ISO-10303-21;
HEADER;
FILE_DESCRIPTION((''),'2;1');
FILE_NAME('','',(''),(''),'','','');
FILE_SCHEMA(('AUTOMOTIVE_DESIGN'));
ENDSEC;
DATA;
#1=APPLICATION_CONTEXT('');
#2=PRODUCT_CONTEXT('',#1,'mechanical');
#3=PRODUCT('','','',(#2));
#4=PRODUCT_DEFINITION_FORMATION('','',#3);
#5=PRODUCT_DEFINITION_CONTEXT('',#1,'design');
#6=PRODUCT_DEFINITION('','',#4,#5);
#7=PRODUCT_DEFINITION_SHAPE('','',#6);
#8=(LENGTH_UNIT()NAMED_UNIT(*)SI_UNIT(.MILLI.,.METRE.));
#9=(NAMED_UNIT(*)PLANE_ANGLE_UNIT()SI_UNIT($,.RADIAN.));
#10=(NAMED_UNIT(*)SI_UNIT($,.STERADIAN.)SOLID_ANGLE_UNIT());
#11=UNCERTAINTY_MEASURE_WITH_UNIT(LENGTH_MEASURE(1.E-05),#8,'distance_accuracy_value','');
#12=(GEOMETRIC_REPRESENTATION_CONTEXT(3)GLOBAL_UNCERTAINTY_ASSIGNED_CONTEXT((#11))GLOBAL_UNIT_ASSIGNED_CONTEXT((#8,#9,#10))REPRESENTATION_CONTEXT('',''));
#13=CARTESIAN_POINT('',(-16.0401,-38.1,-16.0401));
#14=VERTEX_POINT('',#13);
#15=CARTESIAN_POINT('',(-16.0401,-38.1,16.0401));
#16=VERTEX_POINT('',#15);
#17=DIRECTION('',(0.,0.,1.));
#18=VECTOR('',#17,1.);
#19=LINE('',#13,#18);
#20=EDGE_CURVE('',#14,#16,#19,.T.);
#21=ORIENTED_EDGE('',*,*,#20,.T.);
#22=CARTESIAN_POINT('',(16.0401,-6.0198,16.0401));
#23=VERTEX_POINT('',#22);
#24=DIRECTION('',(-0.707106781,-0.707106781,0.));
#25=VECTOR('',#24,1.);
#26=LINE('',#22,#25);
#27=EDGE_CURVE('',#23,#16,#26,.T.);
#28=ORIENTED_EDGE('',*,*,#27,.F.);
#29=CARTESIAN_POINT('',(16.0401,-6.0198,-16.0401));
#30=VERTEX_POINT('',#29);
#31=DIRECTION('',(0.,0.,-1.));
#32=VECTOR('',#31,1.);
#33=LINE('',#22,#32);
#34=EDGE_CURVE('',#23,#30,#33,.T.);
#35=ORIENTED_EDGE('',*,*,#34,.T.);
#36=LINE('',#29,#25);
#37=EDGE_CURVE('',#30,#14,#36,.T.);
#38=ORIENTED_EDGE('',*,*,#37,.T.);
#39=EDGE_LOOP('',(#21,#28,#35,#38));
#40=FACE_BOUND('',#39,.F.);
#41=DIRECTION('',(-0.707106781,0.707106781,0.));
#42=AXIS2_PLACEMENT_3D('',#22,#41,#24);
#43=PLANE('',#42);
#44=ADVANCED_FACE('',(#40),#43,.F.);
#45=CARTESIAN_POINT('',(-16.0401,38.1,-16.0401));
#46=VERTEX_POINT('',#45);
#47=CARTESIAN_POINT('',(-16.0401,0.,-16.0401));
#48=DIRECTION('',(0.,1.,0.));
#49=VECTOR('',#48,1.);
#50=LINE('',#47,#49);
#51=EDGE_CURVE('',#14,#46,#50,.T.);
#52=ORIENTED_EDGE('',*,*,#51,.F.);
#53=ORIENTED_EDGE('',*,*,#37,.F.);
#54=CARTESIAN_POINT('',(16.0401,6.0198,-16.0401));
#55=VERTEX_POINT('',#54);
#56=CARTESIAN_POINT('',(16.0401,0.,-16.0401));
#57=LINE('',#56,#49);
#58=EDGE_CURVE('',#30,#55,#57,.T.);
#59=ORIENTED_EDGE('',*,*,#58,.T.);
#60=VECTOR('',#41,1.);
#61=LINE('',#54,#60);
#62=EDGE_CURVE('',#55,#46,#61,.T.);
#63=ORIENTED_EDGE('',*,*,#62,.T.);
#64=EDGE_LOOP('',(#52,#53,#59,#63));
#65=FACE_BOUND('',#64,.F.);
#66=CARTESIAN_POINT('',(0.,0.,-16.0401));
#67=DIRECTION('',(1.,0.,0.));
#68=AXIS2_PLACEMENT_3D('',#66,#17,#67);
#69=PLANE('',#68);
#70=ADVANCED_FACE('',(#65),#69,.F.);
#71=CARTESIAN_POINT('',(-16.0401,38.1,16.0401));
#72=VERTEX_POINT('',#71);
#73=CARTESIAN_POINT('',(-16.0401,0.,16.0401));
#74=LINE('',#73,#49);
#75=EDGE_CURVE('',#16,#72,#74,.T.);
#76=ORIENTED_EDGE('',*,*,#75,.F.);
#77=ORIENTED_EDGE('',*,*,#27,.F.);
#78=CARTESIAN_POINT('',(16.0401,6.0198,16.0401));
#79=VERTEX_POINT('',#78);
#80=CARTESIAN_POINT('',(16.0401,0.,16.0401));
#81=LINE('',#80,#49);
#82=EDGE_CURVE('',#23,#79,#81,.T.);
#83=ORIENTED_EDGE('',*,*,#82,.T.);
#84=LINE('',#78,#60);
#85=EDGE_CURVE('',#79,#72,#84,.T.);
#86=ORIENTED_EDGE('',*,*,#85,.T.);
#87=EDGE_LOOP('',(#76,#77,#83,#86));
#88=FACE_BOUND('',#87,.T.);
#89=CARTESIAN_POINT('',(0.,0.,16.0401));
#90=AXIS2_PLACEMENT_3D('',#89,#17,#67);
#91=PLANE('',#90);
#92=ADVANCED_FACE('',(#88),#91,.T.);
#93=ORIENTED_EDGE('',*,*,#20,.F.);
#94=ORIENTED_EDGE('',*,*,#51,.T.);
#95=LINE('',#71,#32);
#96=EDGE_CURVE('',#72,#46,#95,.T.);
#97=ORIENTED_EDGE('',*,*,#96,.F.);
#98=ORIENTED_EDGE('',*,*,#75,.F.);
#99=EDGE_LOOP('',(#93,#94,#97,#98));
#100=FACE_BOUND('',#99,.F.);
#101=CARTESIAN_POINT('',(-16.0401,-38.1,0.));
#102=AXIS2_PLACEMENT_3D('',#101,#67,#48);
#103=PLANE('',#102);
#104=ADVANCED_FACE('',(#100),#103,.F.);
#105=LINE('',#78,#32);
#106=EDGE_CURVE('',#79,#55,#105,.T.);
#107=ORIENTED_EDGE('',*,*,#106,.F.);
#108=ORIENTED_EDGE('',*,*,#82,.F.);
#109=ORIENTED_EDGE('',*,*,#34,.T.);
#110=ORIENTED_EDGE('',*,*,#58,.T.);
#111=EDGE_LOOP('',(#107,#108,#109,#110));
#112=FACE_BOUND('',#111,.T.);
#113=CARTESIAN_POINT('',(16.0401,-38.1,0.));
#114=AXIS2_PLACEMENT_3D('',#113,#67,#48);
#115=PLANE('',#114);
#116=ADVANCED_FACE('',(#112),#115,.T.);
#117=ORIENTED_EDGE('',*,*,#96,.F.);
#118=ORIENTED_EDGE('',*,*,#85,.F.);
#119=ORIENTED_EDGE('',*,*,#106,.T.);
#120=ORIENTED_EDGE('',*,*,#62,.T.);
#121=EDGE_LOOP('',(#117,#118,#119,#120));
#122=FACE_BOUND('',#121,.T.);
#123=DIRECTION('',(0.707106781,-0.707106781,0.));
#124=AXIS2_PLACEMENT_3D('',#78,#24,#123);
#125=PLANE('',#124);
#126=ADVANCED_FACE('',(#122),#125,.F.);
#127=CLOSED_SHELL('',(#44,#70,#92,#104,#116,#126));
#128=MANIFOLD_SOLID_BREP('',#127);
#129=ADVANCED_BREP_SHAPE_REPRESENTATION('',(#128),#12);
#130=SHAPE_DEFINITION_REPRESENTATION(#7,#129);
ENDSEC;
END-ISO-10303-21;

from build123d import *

# Parameters (mm, degrees)
F0_W     = 32.0802
F0_H     = 76.2
F1_DEPTH = 16.0401
F3_DEPTH = 32.0802


# Not quite as in the source:
# - a pattern or mirror of a feature is missing from the dataset's text; its kind, count and spacing are read off the source's solid


with BuildPart() as f1:
    # F0 (on Top) → F1 (new body, symmetric)
    with BuildSketch(Plane.XY):
        Rectangle(F0_W, F0_H)
    extrude(amount=F1_DEPTH, both=True)

    # F2 (on face) → F3 (cut, through all)
    with BuildSketch(Plane.XY.offset(16.0401)):
        Polygon((-16.0401, -38.1), (16.0401, -38.1), (16.0401, -6.0198), align=None)
    f3 = extrude(amount=-F3_DEPTH, mode=Mode.SUBTRACT)

    # F3_copies: F3 across plane
    add(f3.mirror(Plane.ZX), mode=Mode.SUBTRACT)


solid = f1.part
